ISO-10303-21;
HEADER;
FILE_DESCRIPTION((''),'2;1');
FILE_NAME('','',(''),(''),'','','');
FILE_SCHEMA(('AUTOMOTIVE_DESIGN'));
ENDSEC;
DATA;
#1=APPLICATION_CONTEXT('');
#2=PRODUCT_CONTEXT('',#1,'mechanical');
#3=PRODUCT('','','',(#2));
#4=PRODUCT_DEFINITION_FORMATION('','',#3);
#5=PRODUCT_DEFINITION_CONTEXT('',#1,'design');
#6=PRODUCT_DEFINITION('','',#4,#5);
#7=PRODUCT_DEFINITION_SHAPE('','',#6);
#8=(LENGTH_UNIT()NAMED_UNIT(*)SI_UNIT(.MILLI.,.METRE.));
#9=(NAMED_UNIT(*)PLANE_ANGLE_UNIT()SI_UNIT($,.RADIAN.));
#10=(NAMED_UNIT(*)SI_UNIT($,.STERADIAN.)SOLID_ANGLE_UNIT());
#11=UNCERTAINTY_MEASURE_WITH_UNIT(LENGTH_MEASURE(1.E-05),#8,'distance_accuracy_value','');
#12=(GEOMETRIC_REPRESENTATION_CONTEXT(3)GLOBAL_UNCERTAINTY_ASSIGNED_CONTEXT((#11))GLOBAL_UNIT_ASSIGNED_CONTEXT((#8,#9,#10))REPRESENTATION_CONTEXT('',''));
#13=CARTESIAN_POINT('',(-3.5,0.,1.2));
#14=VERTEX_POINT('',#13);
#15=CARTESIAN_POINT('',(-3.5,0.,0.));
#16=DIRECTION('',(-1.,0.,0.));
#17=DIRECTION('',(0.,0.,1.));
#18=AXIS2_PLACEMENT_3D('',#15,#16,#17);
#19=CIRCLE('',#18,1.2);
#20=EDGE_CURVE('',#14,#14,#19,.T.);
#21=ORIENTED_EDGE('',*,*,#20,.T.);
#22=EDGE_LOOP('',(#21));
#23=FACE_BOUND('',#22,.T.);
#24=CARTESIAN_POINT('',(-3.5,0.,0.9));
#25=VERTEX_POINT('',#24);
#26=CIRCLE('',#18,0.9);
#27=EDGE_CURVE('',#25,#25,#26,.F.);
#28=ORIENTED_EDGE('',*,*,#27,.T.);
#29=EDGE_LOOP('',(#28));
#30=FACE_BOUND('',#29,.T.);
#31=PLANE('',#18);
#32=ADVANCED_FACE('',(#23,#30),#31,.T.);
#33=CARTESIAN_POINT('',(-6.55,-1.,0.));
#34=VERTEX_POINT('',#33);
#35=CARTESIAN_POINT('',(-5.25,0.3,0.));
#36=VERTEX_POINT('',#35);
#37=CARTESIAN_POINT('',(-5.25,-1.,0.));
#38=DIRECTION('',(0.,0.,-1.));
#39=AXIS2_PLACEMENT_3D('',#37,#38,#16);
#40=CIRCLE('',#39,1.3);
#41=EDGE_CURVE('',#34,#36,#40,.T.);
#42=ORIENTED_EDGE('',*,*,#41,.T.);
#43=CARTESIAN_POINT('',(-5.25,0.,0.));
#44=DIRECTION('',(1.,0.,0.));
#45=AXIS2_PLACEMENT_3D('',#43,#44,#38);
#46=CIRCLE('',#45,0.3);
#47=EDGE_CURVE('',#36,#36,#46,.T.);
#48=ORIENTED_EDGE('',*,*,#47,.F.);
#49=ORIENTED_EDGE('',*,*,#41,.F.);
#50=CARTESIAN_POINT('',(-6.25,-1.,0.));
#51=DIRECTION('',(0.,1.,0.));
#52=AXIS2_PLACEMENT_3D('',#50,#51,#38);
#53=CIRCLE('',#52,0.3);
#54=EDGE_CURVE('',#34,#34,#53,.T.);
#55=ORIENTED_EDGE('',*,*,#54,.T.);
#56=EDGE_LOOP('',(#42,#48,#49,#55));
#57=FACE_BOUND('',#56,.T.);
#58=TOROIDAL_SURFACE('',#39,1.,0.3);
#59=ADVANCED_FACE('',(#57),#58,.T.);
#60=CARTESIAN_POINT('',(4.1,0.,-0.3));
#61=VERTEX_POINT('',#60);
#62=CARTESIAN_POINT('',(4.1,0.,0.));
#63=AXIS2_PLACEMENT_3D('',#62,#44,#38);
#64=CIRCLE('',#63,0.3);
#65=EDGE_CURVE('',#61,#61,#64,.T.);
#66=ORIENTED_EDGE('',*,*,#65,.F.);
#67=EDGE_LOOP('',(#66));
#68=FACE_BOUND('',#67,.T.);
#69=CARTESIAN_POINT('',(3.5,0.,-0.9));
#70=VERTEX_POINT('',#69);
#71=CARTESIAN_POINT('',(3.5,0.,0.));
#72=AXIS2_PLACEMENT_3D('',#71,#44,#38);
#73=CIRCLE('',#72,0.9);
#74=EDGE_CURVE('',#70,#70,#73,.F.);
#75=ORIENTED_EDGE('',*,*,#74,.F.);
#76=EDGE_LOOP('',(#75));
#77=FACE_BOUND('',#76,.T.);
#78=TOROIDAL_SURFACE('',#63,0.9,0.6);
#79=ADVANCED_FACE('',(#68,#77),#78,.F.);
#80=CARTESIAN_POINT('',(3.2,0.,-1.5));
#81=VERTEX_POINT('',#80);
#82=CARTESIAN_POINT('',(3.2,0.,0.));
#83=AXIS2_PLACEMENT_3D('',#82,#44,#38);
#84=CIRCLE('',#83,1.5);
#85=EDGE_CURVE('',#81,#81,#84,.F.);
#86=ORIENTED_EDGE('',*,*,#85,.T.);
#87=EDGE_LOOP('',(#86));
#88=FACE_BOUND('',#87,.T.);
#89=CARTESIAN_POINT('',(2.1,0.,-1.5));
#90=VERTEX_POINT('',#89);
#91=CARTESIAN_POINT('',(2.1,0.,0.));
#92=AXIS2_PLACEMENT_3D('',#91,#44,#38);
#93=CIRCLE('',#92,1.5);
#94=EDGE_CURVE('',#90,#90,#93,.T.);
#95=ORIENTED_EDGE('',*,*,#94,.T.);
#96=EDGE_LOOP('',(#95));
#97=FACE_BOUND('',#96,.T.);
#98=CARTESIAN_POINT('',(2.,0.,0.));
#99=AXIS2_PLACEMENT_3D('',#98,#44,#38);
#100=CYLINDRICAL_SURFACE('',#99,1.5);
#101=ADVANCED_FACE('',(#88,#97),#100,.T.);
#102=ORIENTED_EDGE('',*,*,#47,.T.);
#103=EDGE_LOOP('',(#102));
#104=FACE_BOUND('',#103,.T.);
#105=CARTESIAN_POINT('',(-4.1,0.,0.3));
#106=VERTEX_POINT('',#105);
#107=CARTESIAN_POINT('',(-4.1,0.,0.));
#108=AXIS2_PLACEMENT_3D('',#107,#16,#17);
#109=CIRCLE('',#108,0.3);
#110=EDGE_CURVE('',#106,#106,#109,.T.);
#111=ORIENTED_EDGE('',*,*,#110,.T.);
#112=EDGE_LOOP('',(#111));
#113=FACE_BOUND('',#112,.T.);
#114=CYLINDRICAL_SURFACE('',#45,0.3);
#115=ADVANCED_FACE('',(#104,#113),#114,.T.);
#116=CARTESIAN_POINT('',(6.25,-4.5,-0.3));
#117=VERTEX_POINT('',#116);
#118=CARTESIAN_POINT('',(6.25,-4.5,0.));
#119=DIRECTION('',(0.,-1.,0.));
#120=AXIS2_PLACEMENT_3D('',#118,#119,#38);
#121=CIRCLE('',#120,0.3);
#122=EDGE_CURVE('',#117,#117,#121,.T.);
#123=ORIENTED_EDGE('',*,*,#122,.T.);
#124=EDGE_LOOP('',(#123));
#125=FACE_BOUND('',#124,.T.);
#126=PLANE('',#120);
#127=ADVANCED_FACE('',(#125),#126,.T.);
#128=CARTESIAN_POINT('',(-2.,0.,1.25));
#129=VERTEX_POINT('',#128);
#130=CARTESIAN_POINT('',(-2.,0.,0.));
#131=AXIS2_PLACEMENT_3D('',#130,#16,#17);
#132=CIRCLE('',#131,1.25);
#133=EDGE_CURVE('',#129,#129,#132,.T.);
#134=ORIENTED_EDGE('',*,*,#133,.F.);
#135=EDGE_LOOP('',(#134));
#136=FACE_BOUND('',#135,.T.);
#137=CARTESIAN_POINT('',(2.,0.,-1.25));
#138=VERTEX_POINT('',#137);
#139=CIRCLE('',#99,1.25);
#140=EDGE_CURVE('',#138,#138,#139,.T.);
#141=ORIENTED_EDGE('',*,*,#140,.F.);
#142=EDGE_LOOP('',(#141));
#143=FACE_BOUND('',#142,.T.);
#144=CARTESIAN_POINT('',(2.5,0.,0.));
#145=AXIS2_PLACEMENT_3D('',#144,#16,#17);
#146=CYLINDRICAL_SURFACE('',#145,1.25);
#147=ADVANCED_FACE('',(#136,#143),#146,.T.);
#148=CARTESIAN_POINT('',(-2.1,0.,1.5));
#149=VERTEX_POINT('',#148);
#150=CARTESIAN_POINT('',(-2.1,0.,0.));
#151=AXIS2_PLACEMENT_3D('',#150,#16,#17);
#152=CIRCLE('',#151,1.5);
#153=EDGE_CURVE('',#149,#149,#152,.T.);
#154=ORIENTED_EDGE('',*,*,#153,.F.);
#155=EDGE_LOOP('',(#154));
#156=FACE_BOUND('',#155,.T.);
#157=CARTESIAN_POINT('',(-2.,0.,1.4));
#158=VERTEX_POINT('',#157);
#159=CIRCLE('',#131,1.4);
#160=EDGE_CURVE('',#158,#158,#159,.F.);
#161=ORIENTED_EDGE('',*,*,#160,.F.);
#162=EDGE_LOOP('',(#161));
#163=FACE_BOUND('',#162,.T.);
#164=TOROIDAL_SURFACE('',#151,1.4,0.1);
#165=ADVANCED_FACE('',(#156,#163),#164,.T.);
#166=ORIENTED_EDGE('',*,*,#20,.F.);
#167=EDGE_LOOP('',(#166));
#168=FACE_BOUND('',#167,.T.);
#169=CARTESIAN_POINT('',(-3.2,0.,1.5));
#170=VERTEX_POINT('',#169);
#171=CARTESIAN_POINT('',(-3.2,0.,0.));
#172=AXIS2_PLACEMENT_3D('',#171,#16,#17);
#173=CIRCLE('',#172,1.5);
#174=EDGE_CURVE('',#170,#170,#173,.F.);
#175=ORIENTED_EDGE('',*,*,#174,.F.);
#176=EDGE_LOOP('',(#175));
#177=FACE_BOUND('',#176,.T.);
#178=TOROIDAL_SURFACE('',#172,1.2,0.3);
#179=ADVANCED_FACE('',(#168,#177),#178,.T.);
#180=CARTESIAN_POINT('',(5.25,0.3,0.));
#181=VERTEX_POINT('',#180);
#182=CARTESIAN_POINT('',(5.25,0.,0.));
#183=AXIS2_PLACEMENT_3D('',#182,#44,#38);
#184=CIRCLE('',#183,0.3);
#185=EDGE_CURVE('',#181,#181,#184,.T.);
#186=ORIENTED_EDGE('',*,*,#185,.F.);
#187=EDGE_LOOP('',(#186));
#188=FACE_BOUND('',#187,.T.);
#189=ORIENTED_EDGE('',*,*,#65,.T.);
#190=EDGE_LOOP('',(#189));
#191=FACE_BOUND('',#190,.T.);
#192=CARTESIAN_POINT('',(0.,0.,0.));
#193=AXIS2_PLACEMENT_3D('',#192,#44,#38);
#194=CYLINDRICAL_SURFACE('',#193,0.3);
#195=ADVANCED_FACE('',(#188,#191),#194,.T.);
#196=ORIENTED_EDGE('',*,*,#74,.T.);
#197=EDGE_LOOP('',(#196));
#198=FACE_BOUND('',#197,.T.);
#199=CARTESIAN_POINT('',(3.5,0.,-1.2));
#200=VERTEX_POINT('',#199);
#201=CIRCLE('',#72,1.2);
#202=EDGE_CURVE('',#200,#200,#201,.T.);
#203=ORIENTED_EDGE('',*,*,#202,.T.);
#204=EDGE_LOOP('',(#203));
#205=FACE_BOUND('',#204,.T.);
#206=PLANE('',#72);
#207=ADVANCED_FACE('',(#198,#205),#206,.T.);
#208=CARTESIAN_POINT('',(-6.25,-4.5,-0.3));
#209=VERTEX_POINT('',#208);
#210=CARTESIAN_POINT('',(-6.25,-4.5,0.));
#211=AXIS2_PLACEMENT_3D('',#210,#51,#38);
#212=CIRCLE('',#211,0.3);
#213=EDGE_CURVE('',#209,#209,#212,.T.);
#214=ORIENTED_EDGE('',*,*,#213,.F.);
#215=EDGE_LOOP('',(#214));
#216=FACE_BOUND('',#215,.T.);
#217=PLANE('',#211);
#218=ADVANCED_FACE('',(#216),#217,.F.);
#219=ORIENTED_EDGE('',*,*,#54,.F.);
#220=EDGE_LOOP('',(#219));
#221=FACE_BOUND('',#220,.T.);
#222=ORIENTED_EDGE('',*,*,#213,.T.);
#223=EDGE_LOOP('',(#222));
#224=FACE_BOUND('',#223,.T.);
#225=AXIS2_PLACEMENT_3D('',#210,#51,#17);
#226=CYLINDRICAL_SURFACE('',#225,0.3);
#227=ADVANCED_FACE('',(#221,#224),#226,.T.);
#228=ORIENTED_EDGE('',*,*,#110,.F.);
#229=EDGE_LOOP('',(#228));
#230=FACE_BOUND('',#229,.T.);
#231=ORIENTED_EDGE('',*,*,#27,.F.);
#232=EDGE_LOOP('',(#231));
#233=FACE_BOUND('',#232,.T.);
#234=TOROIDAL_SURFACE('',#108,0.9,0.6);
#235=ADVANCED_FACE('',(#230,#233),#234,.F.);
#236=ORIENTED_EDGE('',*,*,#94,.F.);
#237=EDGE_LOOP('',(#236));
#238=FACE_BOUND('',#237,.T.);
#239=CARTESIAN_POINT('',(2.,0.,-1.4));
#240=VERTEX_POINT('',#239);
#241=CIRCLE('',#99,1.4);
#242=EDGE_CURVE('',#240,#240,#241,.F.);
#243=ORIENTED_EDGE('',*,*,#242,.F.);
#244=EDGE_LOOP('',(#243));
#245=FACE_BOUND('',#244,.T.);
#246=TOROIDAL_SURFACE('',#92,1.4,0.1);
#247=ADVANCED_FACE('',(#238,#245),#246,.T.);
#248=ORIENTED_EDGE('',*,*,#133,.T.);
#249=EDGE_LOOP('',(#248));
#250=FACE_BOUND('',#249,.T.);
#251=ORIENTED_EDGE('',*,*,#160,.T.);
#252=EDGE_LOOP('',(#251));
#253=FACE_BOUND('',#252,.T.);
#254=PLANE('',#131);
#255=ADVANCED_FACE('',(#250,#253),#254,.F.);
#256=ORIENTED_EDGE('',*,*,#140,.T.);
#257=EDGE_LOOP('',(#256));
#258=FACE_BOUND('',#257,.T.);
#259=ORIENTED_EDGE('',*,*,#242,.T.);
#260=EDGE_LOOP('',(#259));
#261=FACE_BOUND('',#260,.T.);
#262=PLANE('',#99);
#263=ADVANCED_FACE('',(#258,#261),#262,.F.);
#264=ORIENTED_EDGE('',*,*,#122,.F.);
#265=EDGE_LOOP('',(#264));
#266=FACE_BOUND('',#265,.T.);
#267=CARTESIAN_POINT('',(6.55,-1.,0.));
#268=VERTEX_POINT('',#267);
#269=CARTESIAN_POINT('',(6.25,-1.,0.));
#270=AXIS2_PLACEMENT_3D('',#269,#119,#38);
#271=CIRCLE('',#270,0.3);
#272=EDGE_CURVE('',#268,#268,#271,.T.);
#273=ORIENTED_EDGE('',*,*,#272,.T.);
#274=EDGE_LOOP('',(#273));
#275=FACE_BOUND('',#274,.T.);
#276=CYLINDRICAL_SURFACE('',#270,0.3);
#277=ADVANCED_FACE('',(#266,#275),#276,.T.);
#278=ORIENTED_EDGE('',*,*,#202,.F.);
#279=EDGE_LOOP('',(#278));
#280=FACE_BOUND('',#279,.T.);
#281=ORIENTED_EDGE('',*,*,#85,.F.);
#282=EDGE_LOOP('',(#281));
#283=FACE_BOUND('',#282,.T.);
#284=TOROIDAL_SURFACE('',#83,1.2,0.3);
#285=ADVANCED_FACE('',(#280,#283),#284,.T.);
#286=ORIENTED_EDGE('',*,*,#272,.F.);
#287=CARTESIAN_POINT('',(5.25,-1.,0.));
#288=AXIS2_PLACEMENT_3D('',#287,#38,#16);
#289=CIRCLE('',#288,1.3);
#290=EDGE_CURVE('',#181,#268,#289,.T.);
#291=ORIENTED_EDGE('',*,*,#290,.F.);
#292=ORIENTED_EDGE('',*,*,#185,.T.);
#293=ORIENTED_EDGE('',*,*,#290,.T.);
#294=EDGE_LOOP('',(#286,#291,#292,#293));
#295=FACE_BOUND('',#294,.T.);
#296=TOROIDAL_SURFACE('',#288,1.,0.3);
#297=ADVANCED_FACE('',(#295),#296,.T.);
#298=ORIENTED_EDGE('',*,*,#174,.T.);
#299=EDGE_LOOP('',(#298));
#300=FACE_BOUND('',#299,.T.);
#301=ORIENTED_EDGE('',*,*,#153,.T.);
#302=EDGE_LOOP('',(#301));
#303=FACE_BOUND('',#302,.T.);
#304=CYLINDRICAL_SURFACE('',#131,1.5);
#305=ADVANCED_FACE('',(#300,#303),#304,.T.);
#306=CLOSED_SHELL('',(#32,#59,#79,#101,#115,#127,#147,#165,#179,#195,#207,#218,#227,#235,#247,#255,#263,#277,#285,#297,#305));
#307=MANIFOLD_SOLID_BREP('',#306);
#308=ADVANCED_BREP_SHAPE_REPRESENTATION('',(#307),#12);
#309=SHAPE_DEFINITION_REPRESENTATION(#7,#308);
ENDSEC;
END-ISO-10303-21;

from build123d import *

# Parameters (mm, degrees)
SKETCH_1_R           = 1.25
EXTRUDE_1_DEPTH      = 2.5
EXTRUDE_3_DEPTH      = 1
EXTRUDE_3_DEPTH_BACK = 0.5
SKETCH_2_R           = 1.5
EXTRUDE_4_DEPTH      = 1
EXTRUDE_4_DEPTH_BACK = 0.5
SKETCH_3_R           = 1.5
SWEEP_1_OUTLINE_R    = 0.3
SWEEP_1_ANGLE        = 90
SWEEP_1_2_OUTLINE_R  = 0.3
SWEEP_1_2_ANGLE      = 90
SWEEP_START          = -4.5
SWEEP_1_3_OUTLINE_R  = 0.3
SWEEP_1_3_DEPTH      = 3.5000001
SWEEP_START_2        = -5.2500001
SWEEP_1_4_OUTLINE_R  = 0.3
SWEEP_1_4_DEPTH      = 2.2500001
SWEEP_START_3        = 3
SWEEP_1_5_OUTLINE_R  = 0.3
SWEEP_1_5_DEPTH      = 2.2500001
SWEEP_1_6_OUTLINE_R  = 0.3
SWEEP_1_6_DEPTH      = 3.5000001
FILLET_1_R           = 0.6
FILLET_2_R           = 0.3
FILLET_3_R           = 0.1


with BuildPart() as part:
    # Эскиз1 → Бобышка-Вытянуть1 (new, symmetric)
    with BuildSketch(Plane(origin=(0, 0, 0), x_dir=(0, 0, -1), z_dir=(1, 0, 0))):
        Circle(SKETCH_1_R)
    extrude(amount=EXTRUDE_1_DEPTH, both=True)

    # Эскиз2 → Бобышка-Вытянуть3 (add, two sides: drawn at the far end of the back side and taken through both)
    with BuildSketch(Plane(origin=(2.5, 0, 0), x_dir=(0, 0, -1), z_dir=(1, 0, 0)).offset(-EXTRUDE_3_DEPTH_BACK)):
        Circle(SKETCH_2_R)
    extrude(amount=EXTRUDE_3_DEPTH + EXTRUDE_3_DEPTH_BACK)

    # Эскиз3 → Бобышка-Вытянуть4 (add, two sides: drawn at the far end of the back side and taken through both)
    with BuildSketch(Plane.ZY.offset(2.5).offset(-EXTRUDE_4_DEPTH_BACK)):
        with Locations(Location((0, 0, 0), (0, 0, 180))):
            Circle(SKETCH_3_R)
    extrude(amount=EXTRUDE_4_DEPTH + EXTRUDE_4_DEPTH_BACK)



with BuildPart() as body_2:
    # По траектории1: read off the stored shape, not the designer's step
    # По траектории1 outline → По траектории1 (revolve)
    with BuildSketch(Plane(origin=(-5.25, -1, 0), x_dir=(0, 1, 0), z_dir=(1, 0, 0))):
        with Locations((1, 0)):
            Circle(SWEEP_1_OUTLINE_R)
    revolve(axis=Axis((-5.25, -1, 0), (0, 0, 1)), revolution_arc=SWEEP_1_ANGLE)

    # Sweep 1 3 outline → Sweep 1 3 (add)
    with BuildSketch(Plane(origin=(0, 0, 0), x_dir=(1, 0, 0), z_dir=(0, 1, 0)).offset(SWEEP_START)):
        with Locations((-6.25, 0)):
            Circle(SWEEP_1_3_OUTLINE_R)
    extrude(amount=SWEEP_1_3_DEPTH)


with BuildPart() as body_3:
    # Sweep 1 2 outline → Sweep 1 2 (revolve)
    with BuildSketch(Plane(origin=(5.25, -1, 0), x_dir=(1, 0, 0), z_dir=(0, -1, 0))):
        with Locations((1, 0)):
            Circle(SWEEP_1_2_OUTLINE_R)
    revolve(axis=Axis((5.25, -1, 0), (0, 0, 1)), revolution_arc=SWEEP_1_2_ANGLE)


with BuildPart() as part_1:
    add(part.part)

    add(body_2.part)  # Sweep 1 4 merges body 2
    # Sweep 1 4 outline → Sweep 1 4 (add)
    with BuildSketch(Plane.YZ.offset(SWEEP_START_2)):
        Circle(SWEEP_1_4_OUTLINE_R)
    extrude(amount=SWEEP_1_4_DEPTH)


    add(body_3.part)  # Sweep 1 5 merges body 3
    # Sweep 1 5 outline → Sweep 1 5 (add)
    with BuildSketch(Plane.YZ.offset(SWEEP_START_3)):
        Circle(SWEEP_1_5_OUTLINE_R)
    extrude(amount=SWEEP_1_5_DEPTH)

    # Sweep 1 6 outline → Sweep 1 6 (add)
    with BuildSketch(Plane(origin=(0, 0, 0), x_dir=(1, 0, 0), z_dir=(0, 1, 0)).offset(SWEEP_START)):
        with Locations((6.25, 0)):
            Circle(SWEEP_1_6_OUTLINE_R)
    extrude(amount=SWEEP_1_6_DEPTH)

    # Скругление1
    fillet_1_edges = [part_1.edges().sort_by_distance(p)[0] for p in [
        (-3.5, -0.3, 0),
        (3.5, -0.3, 0),
    ]]
    fillet(fillet_1_edges, radius=FILLET_1_R)

    # Скругление2
    fillet_2_edges = [part_1.edges().sort_by_distance(p)[0] for p in [
        (-3.5, 0, 1.5),
        (3.5, 0, 1.5),
    ]]
    fillet(fillet_2_edges, radius=FILLET_2_R)

    # Скругление3
    fillet_3_edges = [part_1.edges().sort_by_distance(p)[0] for p in [
        (-2, 0, 1.5),
        (2, 0, 1.5),
    ]]
    fillet(fillet_3_edges, radius=FILLET_3_R)


solid = part_1.part
